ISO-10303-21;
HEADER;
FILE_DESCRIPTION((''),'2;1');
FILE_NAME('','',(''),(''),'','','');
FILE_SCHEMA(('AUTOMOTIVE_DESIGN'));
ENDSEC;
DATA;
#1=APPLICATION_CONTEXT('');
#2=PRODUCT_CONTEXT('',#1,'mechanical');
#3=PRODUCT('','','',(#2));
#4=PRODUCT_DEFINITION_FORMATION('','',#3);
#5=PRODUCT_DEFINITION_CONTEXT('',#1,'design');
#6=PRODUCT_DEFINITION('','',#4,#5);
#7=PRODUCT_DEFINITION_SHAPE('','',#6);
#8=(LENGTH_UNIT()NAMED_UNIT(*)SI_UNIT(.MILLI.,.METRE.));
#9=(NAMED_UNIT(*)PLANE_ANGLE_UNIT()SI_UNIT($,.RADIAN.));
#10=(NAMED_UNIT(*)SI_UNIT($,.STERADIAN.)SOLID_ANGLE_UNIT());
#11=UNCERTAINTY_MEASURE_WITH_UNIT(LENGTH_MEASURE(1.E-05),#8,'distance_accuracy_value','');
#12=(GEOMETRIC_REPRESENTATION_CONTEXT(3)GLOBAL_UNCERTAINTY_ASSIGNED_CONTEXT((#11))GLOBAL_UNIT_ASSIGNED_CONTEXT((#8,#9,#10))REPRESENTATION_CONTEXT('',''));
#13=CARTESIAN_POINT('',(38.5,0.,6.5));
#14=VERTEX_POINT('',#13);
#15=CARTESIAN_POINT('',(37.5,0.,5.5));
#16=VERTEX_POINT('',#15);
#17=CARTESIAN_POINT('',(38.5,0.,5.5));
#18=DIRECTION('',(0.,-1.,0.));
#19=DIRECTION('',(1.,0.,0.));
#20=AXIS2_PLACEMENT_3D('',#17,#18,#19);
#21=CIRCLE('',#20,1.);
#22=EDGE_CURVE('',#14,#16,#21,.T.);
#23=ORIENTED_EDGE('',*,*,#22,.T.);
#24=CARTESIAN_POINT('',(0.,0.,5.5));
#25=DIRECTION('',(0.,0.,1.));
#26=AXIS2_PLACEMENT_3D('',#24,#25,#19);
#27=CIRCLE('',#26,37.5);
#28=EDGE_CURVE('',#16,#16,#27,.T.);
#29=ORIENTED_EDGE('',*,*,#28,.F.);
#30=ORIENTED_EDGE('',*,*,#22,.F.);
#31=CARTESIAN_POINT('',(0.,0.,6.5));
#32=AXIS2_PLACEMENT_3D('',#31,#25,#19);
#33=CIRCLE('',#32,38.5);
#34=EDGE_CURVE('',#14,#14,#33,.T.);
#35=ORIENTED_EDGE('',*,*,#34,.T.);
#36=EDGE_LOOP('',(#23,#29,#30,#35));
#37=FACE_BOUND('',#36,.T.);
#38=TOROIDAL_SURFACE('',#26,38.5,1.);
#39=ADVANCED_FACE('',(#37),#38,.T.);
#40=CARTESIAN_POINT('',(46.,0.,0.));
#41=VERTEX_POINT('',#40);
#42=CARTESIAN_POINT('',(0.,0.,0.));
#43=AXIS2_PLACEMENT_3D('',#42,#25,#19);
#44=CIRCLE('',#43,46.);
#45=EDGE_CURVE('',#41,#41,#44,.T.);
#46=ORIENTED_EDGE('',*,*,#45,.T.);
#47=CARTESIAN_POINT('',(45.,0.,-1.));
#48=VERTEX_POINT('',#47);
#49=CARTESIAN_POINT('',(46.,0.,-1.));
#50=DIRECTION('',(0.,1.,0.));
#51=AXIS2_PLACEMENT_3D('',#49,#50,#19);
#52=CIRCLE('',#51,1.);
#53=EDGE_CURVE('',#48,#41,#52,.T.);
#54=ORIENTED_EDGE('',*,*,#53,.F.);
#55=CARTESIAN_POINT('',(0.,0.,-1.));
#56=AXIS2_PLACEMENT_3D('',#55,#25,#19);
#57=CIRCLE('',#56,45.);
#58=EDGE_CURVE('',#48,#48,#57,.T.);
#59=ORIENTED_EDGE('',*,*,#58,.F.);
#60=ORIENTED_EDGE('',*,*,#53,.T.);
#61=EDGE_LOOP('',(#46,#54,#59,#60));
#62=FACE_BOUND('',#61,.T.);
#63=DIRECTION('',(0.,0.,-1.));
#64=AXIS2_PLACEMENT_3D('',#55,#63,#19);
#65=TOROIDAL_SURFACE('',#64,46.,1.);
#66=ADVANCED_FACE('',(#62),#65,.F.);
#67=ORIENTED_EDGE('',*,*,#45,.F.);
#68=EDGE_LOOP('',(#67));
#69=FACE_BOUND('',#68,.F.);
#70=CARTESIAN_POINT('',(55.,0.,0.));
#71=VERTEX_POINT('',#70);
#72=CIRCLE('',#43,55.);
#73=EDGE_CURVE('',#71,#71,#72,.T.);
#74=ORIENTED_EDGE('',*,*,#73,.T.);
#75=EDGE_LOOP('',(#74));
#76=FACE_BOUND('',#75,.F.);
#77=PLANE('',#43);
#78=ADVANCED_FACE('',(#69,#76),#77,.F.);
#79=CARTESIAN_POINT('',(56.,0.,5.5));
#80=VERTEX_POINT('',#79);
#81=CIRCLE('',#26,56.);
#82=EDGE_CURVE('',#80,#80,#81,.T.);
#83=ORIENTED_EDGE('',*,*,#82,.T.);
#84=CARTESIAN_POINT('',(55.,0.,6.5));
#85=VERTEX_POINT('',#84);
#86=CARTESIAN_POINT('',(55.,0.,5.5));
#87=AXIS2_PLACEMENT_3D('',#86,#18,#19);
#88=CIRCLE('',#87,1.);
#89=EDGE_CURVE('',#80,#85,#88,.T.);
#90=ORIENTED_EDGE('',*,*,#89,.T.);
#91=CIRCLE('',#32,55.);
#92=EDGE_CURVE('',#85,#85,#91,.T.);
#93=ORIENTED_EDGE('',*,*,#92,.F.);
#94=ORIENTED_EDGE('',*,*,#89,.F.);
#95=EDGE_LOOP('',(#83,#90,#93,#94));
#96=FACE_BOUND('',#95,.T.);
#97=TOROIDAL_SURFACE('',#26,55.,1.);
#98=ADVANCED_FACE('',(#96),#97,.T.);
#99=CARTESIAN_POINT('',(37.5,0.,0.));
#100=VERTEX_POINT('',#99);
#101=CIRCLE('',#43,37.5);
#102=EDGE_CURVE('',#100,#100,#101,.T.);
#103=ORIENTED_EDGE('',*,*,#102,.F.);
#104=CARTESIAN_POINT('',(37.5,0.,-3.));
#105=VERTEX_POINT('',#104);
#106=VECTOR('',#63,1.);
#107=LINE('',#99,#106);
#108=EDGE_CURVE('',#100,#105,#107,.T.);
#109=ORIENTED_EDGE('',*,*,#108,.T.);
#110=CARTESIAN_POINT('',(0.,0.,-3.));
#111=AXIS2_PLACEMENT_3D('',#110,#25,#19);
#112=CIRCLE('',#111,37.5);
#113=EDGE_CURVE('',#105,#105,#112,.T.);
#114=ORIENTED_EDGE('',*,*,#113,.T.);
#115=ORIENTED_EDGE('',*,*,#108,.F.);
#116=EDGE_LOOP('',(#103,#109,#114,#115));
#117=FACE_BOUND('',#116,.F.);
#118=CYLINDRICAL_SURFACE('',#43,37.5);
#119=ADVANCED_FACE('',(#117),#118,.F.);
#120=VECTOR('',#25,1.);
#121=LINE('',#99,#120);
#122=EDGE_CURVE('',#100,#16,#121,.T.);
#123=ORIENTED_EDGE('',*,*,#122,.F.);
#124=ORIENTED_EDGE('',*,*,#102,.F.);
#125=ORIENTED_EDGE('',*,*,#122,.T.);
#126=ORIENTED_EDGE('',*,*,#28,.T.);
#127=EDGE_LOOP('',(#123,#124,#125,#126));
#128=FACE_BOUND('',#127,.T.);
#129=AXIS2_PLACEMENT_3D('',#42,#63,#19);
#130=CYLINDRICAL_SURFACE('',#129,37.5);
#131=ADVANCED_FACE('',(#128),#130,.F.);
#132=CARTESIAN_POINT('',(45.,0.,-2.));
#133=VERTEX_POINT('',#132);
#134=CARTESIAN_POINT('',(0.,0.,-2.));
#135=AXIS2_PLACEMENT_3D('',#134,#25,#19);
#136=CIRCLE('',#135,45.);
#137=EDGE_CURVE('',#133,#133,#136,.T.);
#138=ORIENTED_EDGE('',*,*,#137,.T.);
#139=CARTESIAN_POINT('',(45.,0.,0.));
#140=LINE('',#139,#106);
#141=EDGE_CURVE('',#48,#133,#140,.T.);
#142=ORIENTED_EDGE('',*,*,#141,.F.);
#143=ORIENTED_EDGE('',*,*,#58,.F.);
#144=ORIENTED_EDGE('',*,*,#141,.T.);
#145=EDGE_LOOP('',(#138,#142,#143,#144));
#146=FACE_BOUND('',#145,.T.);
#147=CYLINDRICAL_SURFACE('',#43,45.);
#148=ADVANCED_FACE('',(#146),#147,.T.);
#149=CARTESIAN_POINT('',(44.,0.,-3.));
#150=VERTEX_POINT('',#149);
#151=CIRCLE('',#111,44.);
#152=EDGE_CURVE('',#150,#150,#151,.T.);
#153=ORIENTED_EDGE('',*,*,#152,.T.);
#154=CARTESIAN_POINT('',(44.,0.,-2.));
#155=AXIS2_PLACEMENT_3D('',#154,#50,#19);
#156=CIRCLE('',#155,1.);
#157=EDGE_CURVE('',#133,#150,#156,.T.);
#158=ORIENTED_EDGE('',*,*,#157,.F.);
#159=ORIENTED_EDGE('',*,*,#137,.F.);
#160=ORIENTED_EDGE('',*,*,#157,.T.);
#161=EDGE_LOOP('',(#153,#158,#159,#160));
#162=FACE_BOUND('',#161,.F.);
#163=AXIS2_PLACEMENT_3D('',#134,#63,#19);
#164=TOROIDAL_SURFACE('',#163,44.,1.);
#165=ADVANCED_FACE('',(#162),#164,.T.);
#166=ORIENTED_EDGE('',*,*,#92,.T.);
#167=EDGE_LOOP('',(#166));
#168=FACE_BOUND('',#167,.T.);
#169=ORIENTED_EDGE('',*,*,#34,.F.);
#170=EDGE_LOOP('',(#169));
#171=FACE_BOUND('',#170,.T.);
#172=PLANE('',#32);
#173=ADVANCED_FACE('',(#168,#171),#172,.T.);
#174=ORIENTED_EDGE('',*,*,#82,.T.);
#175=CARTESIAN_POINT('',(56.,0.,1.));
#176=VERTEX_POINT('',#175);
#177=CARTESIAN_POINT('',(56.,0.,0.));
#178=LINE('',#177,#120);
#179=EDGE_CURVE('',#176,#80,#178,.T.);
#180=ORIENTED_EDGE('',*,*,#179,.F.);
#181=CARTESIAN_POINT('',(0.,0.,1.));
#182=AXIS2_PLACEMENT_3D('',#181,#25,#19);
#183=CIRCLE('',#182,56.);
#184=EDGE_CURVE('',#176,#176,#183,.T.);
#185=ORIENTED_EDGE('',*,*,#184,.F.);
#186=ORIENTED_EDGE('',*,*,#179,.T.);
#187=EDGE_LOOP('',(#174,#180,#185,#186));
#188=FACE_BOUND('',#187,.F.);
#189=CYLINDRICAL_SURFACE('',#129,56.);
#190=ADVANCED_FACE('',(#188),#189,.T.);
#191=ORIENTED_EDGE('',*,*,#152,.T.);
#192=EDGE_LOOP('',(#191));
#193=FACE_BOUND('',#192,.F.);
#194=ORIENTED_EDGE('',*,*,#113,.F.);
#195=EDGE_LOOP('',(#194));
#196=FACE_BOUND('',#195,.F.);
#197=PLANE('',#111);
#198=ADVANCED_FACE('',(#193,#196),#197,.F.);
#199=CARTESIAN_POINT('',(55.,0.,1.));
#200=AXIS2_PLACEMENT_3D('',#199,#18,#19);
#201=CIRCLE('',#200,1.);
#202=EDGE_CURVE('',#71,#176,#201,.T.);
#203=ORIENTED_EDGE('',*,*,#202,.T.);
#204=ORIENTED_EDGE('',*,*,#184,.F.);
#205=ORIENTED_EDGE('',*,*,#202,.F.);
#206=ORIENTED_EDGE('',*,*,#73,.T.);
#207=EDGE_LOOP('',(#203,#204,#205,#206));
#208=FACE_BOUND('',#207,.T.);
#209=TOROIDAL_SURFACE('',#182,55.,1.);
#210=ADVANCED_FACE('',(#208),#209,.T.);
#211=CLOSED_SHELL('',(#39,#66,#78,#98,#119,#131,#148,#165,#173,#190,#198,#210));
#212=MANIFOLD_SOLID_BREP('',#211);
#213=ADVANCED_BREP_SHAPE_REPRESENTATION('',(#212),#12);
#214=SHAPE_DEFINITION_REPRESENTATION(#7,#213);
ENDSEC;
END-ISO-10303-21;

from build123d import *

# Parameters (mm, degrees)
F0_R     = 56
F0_R_2   = 37.5
F1_DEPTH = 6.5
F2_R     = 45
F2_R_2   = 37.5
F3_DEPTH = 3
F4_R     = 1


with BuildPart() as f1:
    # F0 (on Top) → F1 (new body)
    with BuildSketch(Plane.XY):
        Circle(F0_R)
        Circle(F0_R_2, mode=Mode.SUBTRACT)
    extrude(amount=F1_DEPTH)

    # F2 (on Top) → F3 (join)
    with BuildSketch(Plane.XY):
        Circle(F2_R)
        Circle(F2_R_2, mode=Mode.SUBTRACT)
    extrude(amount=-F3_DEPTH)

    # F4
    f4_edges = [f1.edges().sort_by_distance(p)[0] for p in [
        (-56, 0, 6.5),
        (-45, 0, -3),
        (-45, 0, 0),
        (-37.5, 0, 6.5),
        (-56, 0, 0),
    ]]
    fillet(f4_edges, radius=F4_R)


solid = f1.part
